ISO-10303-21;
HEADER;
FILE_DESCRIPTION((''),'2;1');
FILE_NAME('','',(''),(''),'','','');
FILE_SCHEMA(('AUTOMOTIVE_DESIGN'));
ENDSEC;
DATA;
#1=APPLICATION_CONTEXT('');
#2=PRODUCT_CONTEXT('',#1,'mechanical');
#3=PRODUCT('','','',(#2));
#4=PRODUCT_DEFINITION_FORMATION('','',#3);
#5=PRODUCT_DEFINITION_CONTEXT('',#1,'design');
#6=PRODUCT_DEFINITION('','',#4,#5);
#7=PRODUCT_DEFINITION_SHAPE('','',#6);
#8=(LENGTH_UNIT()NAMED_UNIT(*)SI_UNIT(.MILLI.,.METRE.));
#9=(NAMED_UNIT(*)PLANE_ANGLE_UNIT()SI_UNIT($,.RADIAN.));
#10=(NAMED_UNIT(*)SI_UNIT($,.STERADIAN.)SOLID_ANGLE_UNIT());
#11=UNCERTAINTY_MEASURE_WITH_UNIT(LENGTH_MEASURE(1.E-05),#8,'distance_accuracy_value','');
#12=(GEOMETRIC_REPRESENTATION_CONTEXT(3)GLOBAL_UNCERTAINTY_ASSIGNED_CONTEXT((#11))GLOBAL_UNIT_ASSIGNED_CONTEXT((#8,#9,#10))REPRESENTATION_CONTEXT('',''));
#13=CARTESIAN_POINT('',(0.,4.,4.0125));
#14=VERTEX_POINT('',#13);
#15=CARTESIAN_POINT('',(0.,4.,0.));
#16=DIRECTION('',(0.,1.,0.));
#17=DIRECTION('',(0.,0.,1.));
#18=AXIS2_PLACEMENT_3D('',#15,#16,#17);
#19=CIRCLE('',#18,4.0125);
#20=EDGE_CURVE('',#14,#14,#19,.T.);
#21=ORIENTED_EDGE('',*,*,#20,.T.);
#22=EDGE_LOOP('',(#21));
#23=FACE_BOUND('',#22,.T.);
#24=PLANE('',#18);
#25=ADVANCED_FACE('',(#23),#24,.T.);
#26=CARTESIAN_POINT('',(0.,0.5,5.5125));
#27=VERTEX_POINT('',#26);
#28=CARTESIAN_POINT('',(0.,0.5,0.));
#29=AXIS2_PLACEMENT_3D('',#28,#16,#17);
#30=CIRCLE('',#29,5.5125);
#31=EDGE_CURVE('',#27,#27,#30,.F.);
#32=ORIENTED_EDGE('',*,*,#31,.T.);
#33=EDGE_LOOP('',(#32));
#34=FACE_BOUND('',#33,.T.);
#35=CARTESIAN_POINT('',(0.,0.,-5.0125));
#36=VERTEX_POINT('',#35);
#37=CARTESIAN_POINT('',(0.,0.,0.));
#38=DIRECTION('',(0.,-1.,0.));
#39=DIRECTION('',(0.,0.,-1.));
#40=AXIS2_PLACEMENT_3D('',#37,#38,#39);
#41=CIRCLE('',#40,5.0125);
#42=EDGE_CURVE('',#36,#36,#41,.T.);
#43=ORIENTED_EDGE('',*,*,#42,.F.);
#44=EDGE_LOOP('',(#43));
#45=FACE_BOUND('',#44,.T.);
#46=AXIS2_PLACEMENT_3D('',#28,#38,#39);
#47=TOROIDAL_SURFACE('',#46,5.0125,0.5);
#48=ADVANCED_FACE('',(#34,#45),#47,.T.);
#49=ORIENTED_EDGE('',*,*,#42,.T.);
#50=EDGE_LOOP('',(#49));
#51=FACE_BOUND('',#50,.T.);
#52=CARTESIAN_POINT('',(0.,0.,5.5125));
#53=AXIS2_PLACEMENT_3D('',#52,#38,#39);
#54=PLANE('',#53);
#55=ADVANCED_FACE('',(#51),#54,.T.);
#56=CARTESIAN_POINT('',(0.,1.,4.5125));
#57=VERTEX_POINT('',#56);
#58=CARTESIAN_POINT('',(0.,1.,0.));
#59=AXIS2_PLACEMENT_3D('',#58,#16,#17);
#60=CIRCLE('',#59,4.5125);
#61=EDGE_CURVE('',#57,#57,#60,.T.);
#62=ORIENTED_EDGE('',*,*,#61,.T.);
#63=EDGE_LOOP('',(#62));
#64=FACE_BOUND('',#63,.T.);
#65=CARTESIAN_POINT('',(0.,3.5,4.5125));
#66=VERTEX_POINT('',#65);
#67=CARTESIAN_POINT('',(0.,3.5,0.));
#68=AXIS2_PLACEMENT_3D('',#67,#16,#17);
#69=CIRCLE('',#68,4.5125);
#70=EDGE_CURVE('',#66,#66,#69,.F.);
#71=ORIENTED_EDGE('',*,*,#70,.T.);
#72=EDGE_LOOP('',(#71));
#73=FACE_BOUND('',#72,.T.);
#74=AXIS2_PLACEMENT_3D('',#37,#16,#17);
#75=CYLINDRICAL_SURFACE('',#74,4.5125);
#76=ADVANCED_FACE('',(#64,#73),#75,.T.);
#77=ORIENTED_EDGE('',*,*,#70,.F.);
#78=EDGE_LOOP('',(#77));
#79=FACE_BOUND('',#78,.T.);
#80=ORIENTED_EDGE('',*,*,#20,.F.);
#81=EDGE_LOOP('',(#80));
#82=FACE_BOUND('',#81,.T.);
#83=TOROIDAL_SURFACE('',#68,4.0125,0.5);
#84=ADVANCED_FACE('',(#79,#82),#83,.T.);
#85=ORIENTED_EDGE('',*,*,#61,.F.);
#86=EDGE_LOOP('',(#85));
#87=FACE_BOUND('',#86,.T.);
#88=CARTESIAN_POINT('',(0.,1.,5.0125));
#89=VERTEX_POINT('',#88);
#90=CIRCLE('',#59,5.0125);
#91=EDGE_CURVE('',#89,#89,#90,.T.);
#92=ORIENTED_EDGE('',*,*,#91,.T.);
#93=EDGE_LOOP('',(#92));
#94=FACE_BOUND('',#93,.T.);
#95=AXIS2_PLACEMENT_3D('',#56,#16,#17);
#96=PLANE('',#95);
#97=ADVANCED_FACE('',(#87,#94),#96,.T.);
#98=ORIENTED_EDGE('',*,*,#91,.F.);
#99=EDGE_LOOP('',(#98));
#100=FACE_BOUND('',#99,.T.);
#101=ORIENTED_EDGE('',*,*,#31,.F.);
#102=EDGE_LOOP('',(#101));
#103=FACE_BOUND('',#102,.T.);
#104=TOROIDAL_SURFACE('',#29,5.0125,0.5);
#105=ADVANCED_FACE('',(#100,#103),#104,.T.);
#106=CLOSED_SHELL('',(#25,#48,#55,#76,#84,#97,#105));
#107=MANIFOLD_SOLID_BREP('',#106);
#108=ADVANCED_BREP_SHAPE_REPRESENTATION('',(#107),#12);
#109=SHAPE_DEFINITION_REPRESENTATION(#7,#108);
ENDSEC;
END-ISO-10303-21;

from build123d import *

# Parameters (mm, degrees)
FILLET1_R = 0.5


with BuildPart() as part:
    # Sketch1 → Revolve1 (revolve)
    with BuildSketch(Plane(origin=(0, 0, 0), x_dir=(0, 0, -1), z_dir=(1, 0, 0))):
        Polygon((0, 0), (0, 4), (-4.5125, 4), (-4.5125, 1), (-5.5125, 1), (-5.5125, 0), align=None)
    revolve(axis=Axis((0, 0, 0), (0, -1, 0)))

    # Fillet1
    fillet1_edges = [part.edges().sort_by_distance(p)[0] for p in [
        (0, 0, -5.5125),
        (0, 1, -5.5125),
        (0, 4, -4.5125),
    ]]
    fillet(fillet1_edges, radius=FILLET1_R - 0.0001)  # a hair under: the kernel refuses the full size


solid = part.part
